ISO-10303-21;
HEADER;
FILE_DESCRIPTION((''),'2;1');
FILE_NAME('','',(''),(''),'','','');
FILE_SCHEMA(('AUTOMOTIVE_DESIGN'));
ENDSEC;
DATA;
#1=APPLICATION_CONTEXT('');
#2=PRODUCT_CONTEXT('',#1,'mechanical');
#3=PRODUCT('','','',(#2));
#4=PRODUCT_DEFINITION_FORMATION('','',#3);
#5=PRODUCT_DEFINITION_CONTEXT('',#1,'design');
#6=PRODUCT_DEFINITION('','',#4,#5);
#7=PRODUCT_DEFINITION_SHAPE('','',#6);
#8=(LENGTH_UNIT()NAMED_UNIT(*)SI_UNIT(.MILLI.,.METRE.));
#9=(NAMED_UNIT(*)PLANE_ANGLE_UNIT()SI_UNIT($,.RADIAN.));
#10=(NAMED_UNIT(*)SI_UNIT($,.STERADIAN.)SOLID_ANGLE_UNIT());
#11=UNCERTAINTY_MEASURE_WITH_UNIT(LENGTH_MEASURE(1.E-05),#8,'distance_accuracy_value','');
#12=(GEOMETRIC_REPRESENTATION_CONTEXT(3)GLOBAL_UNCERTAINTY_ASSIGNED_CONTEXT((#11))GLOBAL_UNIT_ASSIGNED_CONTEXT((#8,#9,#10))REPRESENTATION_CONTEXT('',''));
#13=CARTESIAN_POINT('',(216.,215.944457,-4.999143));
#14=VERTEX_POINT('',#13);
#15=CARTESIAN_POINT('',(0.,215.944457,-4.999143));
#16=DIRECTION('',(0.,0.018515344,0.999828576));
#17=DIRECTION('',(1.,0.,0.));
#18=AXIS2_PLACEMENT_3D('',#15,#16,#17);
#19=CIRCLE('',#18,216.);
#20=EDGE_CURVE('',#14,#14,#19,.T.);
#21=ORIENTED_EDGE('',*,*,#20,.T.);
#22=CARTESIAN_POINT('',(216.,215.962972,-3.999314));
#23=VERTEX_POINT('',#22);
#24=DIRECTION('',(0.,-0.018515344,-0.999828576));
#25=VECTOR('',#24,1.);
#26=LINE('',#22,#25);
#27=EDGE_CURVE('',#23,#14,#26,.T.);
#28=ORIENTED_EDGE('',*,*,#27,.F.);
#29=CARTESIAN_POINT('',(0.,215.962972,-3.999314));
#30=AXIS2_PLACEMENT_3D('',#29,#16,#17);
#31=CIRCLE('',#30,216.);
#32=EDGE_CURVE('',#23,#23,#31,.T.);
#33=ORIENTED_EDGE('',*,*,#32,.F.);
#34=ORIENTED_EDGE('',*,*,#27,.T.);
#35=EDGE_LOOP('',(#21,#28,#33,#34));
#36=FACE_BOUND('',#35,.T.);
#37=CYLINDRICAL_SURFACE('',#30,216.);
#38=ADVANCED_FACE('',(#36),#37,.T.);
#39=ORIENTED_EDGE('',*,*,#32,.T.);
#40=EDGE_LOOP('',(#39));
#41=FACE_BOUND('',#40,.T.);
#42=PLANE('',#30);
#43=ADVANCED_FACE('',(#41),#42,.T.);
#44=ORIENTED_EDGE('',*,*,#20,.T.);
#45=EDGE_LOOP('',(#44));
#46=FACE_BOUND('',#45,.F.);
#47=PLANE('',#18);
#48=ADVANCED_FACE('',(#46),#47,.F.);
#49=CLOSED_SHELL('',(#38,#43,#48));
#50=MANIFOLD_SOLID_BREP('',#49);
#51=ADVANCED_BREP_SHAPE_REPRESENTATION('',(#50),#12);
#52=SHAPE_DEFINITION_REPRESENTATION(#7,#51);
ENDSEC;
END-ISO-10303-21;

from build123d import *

# Parameters (mm, degrees)
F3_R     = 216
F6_DEPTH = 1


# Not quite as in the source:
# - the program builds the solid bodies; features that only make, move or delete a surface that nothing else refers to are left out


with BuildPart() as f6:
    # F3 (on face) → F6 (new body)
    with BuildSketch(Plane(origin=(0, 0, 0), x_dir=(1, 0, 0), z_dir=(0, 0.018515344, 0.9998285763))):
        with Locations((0, 216)):
            Circle(F3_R)
    extrude(amount=-F6_DEPTH)


solid = f6.part
